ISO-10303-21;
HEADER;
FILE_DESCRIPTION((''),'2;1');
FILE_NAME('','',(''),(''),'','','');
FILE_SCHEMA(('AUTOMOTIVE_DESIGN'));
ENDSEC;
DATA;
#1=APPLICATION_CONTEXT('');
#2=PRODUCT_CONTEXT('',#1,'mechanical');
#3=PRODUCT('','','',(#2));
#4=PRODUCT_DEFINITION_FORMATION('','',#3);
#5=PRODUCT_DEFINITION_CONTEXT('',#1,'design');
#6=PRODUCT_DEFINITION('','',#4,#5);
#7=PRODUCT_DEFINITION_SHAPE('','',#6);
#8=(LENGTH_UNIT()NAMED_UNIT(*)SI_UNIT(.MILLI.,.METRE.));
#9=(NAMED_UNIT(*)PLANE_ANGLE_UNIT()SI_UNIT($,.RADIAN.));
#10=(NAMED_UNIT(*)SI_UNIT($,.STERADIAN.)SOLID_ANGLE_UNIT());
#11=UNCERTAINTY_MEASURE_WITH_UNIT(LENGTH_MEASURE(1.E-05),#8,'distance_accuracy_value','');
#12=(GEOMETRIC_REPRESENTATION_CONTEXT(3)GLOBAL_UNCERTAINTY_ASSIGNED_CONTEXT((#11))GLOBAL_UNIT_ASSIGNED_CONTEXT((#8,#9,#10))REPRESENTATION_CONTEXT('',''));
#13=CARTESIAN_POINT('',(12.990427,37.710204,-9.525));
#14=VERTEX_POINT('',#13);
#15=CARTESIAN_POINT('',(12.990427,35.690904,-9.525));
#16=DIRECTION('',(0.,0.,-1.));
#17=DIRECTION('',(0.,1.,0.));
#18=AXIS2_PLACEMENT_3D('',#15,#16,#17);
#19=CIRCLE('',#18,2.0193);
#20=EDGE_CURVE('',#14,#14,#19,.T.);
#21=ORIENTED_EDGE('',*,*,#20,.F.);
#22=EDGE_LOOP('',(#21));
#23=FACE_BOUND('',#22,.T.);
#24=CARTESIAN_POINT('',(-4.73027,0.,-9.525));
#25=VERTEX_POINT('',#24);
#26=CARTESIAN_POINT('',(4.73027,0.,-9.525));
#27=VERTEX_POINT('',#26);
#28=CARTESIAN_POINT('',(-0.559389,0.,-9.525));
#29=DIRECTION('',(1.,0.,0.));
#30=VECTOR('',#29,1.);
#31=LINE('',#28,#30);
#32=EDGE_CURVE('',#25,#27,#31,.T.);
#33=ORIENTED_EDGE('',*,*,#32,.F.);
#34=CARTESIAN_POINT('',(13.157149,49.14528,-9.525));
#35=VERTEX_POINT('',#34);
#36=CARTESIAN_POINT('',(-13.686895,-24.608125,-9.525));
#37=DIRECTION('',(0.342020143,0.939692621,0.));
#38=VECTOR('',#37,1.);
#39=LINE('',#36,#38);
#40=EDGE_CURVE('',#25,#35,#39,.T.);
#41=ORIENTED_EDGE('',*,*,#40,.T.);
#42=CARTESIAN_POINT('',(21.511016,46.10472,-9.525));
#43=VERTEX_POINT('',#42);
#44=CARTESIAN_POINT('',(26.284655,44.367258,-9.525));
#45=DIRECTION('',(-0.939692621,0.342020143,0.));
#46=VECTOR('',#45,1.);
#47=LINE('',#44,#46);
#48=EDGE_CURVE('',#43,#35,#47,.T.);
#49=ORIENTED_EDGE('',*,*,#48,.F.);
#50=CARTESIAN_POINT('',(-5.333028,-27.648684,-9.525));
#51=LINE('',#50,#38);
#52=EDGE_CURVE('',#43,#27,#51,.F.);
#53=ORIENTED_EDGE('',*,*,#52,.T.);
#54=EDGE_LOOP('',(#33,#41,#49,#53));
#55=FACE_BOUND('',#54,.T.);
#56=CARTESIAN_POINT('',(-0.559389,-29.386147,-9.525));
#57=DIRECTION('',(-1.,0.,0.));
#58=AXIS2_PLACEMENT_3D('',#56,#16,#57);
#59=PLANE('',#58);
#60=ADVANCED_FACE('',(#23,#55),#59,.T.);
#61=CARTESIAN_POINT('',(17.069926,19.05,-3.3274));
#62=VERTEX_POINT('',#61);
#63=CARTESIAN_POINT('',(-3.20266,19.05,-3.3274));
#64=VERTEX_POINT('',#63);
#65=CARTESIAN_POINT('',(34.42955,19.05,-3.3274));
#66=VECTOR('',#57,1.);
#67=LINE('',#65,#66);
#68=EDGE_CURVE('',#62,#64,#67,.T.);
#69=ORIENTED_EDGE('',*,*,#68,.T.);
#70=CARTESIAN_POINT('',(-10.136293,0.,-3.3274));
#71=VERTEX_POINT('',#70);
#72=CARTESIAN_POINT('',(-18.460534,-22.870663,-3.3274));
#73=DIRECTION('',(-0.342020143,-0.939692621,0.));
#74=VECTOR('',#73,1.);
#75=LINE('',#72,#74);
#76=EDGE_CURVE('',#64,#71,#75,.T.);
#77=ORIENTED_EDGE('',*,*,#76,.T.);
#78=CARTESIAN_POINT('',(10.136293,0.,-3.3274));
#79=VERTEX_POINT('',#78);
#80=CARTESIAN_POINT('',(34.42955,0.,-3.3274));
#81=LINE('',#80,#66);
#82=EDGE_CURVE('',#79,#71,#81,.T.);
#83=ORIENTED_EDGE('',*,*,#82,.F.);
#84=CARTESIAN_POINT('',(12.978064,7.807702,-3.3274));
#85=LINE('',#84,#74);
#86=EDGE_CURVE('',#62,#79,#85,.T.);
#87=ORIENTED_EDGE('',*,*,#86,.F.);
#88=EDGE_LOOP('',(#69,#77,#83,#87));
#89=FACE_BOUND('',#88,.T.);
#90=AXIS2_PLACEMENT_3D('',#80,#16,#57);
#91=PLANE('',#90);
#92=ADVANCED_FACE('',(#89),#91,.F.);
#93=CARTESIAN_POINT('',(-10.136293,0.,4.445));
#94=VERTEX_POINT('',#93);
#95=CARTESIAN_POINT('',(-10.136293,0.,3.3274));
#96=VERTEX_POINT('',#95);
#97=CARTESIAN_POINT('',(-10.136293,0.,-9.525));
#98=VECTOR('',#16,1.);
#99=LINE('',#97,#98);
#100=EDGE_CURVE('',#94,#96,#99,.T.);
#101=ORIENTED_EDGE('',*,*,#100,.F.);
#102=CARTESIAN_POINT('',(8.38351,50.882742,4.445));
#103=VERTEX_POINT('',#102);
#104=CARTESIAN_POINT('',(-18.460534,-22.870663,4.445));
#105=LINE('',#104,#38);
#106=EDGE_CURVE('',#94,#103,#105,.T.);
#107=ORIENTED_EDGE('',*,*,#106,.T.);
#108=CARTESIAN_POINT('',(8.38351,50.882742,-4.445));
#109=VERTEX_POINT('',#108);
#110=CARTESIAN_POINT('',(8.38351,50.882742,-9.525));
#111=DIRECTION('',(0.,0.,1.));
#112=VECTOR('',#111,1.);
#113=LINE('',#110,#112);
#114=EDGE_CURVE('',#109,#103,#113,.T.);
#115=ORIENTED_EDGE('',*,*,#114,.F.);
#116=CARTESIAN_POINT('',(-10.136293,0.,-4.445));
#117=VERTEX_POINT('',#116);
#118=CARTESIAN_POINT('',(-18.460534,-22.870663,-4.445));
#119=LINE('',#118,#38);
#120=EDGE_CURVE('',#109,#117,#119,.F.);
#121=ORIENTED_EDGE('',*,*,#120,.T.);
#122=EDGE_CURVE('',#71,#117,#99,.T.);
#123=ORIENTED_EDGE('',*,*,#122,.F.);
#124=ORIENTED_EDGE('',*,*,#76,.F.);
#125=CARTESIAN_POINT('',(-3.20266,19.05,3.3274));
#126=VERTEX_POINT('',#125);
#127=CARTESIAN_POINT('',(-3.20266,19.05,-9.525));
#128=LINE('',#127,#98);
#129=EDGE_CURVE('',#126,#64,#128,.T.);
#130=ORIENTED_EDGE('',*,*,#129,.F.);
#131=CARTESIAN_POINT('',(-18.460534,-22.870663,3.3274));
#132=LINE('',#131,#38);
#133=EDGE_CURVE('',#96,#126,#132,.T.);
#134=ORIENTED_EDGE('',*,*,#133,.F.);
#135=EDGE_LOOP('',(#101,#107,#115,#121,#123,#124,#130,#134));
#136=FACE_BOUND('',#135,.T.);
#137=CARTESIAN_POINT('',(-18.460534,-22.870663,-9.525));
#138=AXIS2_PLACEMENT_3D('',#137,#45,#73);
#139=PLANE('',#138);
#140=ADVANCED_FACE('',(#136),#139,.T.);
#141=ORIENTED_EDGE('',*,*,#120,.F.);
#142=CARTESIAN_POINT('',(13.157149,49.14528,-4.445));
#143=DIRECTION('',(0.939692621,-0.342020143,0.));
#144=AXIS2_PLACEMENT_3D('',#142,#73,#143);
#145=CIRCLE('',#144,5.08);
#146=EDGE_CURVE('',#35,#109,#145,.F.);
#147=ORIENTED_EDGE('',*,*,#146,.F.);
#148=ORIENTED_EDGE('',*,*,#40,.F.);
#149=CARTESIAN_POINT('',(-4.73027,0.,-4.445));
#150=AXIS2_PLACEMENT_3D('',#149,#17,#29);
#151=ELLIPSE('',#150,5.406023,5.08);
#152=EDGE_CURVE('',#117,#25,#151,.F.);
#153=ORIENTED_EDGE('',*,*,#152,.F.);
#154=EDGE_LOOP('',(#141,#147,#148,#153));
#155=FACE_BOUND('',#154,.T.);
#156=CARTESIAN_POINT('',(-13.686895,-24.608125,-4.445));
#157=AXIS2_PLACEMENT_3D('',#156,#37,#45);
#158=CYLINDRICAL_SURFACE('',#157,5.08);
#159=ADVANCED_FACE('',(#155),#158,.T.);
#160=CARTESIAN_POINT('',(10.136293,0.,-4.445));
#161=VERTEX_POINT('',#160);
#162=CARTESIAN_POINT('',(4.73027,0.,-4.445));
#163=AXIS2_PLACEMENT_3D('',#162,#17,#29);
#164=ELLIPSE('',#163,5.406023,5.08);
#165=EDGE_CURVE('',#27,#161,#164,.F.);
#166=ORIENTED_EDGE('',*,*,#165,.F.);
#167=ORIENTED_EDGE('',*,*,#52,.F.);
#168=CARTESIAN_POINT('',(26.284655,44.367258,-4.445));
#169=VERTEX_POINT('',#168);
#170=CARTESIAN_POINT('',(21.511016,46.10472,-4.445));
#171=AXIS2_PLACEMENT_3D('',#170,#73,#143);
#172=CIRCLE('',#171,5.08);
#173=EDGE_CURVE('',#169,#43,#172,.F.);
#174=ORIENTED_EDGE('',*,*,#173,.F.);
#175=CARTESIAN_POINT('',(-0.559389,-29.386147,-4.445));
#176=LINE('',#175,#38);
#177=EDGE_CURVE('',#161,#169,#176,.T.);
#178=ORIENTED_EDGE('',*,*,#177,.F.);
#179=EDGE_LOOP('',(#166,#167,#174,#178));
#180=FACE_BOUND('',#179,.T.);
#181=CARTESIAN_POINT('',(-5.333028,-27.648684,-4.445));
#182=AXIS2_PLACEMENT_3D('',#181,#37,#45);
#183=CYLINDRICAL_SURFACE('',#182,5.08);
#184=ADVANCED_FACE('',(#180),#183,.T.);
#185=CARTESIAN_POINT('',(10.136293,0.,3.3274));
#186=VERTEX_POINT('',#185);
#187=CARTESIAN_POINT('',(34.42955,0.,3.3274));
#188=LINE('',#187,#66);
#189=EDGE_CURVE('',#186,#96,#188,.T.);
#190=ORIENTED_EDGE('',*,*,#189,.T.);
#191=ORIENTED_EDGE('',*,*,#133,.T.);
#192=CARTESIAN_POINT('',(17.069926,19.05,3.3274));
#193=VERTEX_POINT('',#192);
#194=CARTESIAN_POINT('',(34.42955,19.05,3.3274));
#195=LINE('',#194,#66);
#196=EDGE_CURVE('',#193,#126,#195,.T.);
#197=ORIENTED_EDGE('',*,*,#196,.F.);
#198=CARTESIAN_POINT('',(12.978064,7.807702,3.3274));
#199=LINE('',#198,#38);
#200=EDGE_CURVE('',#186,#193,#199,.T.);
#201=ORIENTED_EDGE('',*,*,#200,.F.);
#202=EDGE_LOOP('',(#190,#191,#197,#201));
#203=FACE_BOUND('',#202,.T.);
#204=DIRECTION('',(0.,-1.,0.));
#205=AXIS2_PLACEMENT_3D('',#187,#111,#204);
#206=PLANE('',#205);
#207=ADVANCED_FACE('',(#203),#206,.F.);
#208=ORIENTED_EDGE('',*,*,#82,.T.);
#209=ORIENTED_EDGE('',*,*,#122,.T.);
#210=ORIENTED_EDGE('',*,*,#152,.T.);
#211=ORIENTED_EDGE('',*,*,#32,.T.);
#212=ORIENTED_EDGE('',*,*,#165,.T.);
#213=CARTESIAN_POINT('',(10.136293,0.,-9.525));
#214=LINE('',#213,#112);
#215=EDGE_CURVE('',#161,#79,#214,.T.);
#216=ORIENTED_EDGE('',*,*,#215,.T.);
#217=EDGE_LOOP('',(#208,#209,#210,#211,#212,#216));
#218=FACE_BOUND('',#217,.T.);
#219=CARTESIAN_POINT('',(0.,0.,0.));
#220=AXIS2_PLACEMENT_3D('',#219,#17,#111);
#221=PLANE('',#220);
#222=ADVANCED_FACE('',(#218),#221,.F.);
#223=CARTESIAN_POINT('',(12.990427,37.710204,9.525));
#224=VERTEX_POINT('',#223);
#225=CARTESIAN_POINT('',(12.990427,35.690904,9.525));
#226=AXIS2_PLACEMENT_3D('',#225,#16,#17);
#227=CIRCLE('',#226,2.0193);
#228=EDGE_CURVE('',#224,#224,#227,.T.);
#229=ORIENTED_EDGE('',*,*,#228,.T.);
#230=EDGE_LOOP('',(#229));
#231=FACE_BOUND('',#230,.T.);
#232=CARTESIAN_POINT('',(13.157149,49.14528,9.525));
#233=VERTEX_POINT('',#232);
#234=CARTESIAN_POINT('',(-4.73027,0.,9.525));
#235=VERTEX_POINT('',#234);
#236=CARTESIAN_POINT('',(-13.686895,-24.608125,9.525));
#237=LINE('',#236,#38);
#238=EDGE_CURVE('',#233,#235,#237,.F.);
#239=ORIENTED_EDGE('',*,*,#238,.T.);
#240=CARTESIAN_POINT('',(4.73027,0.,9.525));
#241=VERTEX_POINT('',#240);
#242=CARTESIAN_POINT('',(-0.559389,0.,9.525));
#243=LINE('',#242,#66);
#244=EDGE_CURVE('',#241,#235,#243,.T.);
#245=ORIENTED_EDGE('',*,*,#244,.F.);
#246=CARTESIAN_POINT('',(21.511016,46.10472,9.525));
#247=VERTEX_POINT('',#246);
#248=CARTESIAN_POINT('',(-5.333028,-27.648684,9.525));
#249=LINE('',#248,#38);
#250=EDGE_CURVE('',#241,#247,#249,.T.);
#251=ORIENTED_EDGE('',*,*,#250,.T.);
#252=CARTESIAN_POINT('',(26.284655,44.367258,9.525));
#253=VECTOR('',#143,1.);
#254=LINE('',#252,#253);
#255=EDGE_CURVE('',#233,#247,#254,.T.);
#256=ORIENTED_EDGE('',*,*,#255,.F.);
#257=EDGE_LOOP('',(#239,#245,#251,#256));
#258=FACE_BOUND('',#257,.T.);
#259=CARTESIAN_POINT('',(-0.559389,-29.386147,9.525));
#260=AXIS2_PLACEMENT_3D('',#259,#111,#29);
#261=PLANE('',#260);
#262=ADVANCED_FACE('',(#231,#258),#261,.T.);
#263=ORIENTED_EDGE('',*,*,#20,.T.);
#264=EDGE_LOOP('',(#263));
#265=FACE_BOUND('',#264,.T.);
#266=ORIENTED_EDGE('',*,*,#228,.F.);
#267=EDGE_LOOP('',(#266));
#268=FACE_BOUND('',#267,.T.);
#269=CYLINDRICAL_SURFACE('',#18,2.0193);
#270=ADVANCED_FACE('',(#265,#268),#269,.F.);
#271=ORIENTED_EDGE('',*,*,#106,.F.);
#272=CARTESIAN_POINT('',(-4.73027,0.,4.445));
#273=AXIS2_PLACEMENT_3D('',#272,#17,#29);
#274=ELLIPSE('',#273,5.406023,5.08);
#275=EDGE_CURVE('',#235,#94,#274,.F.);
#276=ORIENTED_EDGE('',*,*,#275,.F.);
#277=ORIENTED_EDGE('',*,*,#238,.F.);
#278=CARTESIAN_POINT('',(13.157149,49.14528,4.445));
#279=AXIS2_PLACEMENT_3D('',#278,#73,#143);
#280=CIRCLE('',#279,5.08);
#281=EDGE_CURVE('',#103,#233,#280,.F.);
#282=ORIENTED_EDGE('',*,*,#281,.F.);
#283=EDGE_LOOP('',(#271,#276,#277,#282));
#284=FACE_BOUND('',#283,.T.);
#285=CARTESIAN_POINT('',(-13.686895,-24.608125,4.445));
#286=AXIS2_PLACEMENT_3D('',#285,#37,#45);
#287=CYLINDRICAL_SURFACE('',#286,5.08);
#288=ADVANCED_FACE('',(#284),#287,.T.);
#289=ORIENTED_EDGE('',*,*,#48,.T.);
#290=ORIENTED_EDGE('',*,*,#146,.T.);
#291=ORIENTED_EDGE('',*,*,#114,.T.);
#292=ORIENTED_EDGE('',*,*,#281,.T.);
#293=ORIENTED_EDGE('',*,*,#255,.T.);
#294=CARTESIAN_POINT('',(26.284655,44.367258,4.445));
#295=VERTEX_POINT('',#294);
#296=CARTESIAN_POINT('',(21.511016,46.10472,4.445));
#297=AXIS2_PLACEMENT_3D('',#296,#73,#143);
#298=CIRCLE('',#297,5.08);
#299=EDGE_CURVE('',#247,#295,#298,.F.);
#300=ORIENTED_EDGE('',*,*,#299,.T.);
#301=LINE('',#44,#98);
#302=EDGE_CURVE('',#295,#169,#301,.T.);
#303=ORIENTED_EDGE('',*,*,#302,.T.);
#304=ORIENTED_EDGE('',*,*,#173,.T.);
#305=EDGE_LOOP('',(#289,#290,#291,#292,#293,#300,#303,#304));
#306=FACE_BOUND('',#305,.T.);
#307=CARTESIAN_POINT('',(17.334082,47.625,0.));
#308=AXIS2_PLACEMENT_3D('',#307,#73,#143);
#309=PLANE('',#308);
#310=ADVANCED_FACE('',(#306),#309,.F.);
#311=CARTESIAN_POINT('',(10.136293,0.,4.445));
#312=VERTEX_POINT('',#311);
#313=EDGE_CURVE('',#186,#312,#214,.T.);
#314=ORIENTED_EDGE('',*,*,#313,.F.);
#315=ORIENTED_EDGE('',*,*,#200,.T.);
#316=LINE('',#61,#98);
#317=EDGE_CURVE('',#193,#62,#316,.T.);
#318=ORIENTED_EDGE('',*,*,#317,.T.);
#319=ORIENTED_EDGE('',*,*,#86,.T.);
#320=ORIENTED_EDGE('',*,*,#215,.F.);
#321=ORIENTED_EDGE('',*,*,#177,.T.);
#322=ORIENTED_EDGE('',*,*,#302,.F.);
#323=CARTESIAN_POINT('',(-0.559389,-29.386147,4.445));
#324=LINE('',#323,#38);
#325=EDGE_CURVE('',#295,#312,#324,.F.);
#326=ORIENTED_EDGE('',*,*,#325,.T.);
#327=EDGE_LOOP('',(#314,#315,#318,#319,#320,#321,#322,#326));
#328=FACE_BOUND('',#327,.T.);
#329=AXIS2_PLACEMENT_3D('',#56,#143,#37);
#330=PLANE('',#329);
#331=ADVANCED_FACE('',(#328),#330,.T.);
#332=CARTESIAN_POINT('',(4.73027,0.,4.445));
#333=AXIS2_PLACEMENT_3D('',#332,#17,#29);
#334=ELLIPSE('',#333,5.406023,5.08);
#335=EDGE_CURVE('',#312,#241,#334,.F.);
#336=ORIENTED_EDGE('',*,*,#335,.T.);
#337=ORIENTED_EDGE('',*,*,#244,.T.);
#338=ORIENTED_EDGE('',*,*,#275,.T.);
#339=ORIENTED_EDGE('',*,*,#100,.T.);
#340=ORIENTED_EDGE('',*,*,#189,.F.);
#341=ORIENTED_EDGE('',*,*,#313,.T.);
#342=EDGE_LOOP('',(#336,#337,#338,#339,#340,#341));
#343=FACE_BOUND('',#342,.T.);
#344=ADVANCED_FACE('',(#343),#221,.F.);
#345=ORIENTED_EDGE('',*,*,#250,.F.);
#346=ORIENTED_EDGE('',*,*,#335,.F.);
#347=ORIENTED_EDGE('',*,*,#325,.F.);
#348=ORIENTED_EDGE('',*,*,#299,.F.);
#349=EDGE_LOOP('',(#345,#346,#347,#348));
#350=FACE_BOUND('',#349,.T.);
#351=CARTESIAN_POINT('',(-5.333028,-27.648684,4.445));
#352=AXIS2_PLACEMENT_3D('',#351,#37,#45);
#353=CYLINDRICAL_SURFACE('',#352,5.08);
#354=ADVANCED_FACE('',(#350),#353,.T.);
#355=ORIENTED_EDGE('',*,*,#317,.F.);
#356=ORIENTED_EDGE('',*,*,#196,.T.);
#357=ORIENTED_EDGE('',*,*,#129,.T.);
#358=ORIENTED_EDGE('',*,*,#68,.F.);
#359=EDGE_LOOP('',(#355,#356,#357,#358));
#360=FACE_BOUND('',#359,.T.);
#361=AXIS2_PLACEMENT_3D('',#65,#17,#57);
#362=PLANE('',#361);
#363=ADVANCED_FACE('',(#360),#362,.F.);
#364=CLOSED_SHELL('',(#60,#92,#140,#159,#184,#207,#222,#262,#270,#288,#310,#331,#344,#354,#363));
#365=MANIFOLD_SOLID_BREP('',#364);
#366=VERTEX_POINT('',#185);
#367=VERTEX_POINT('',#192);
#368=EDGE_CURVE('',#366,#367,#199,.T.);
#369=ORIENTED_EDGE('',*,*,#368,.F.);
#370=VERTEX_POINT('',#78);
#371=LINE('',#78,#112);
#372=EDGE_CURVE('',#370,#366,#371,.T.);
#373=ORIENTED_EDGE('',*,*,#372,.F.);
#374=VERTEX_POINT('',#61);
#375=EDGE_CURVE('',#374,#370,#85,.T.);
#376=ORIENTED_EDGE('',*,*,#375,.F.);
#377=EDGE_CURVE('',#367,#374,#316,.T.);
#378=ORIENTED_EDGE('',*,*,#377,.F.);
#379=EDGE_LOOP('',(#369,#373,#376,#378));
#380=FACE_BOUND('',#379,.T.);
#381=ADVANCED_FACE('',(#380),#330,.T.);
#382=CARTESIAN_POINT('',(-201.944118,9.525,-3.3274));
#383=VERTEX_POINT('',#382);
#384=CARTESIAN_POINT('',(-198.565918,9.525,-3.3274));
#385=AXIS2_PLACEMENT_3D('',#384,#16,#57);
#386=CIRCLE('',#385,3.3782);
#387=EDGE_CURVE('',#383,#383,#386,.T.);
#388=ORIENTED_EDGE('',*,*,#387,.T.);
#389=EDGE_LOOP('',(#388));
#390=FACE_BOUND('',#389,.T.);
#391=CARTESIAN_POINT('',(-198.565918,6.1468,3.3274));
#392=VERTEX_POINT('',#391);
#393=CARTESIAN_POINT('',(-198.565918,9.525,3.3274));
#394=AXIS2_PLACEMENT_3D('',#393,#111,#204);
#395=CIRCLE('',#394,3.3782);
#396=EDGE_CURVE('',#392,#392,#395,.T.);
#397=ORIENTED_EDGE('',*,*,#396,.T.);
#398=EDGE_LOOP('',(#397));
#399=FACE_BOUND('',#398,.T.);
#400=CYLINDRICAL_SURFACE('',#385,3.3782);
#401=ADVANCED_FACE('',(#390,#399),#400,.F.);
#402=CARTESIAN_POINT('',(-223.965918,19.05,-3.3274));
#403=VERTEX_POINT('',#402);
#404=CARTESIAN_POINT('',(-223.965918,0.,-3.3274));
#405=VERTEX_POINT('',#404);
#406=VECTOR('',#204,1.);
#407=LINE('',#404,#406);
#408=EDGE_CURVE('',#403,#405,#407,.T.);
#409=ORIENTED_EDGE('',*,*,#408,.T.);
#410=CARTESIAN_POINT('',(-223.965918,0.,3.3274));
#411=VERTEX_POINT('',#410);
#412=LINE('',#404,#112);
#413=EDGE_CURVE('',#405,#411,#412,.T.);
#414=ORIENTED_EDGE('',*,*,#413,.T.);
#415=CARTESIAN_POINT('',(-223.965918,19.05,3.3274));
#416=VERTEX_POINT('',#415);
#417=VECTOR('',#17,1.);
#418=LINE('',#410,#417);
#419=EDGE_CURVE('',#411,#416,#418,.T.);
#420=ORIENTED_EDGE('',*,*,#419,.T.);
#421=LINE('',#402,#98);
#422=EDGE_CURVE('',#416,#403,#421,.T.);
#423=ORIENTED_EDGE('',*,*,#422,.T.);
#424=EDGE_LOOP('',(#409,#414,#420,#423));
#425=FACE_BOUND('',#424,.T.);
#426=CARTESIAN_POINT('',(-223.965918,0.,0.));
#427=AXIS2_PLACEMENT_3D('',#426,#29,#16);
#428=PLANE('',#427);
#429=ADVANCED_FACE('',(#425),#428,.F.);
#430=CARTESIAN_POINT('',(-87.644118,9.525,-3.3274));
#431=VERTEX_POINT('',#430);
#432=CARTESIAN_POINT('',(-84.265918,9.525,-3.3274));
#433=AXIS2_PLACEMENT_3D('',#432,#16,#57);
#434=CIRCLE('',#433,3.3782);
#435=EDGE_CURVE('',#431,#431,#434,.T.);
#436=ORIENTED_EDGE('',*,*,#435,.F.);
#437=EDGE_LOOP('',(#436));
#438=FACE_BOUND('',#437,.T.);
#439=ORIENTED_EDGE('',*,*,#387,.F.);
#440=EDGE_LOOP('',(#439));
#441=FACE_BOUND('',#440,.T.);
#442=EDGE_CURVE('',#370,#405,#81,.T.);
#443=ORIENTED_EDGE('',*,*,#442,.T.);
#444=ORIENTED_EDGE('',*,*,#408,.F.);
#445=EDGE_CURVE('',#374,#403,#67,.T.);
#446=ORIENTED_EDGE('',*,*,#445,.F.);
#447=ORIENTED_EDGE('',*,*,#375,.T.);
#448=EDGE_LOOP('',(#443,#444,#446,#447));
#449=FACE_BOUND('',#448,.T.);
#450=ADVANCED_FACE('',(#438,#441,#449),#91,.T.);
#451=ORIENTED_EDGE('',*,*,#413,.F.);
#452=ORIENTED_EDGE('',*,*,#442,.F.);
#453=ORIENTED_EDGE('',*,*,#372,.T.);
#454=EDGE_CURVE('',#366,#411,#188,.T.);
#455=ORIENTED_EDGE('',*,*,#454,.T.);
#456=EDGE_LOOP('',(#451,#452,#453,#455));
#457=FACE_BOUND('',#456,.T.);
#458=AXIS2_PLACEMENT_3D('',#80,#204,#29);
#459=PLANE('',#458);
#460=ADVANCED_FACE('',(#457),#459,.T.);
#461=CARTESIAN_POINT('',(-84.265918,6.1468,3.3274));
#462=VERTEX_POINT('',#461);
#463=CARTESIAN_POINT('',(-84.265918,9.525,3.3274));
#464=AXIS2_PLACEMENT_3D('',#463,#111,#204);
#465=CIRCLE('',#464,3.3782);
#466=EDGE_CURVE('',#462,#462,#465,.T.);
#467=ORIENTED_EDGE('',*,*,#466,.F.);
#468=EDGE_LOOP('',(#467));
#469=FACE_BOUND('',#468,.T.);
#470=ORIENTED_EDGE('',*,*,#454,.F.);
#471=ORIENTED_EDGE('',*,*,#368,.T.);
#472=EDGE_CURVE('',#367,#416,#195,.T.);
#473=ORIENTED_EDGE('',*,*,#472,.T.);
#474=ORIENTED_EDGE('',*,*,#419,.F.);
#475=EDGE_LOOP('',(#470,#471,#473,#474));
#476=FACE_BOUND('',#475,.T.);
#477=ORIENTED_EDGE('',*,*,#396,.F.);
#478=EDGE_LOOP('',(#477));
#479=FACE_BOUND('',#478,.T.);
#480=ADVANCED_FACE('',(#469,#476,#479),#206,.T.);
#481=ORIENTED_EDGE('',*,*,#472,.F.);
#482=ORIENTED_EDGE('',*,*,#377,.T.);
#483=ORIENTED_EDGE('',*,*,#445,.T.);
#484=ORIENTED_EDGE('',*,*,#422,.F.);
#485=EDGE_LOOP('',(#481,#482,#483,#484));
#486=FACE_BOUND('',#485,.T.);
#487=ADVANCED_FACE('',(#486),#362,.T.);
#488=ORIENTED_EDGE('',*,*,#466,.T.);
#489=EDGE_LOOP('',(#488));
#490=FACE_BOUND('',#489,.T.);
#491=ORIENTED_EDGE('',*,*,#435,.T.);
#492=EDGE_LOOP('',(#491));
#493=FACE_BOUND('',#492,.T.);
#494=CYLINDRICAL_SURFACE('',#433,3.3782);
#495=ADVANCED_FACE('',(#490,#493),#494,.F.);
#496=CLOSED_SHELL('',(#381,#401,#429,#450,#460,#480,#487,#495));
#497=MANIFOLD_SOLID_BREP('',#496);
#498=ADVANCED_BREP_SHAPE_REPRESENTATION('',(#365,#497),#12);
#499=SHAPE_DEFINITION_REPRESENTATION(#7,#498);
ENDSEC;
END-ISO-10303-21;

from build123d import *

# Parameters (mm, degrees)
BOSS_EXTRUDE2_REACH              = 80.351
SKETCH9_W                        = 19.05
SKETCH9_H                        = 19.05
F_10_32_TAPPED_HOLE1_D           = 4.0386
CUT_EXTRUDE2_REACH               = 260.043
SKETCH11_W                       = 6.6548
SKETCH11_H                       = 19.05
FILLET1_R                        = 5.08
BOSS_EXTRUDE3_REACH              = 260.043
SKETCH11_2_W                     = 6.6548
SKETCH11_2_H                     = 19.05
SKETCH17_W                       = 3.3782
SKETCH17_H                       = 12.8524
F_1_4_CLEARANCE_HOLE1_AT_2_COUNT = 2
F_1_4_CLEARANCE_HOLE1_AT_2_PITCH = 114.3


with BuildPart() as part:
    # Boss-Extrude2: up to this plane
    boss_extrude2_end = Plane(origin=(0, 0, 0), z_dir=(0, 1, 0))
    # Sketch9 → Boss-Extrude2 (new, up to the surface)
    with BuildSketch(Plane(origin=(17.334082407, 47.625, 0), x_dir=(0.939692620785907, -0.34202014332567254, 0), z_dir=(0.34202014332567254, 0.939692620785907, 0)), mode=Mode.PRIVATE) as boss_extrude2_sk1:
        Rectangle(SKETCH9_W, SKETCH9_H)
    boss_extrude2_tool1 = split(extrude(boss_extrude2_sk1.sketch, amount=-BOSS_EXTRUDE2_REACH, mode=Mode.PRIVATE), bisect_by=boss_extrude2_end, keep=Keep.BOTH, mode=Mode.PRIVATE)
    add(boss_extrude2_tool1.solids().sort_by_distance((17.334082, 47.625, 0))[0])

    # #10-32 Tapped Hole1 (through all)
    with Locations(Plane(origin=(0, 0, -9.525), x_dir=(-1, 0, 0), z_dir=(0, 0, -1))):
        with Locations((-12.990426587, 35.690903716)):
            Hole(F_10_32_TAPPED_HOLE1_D / 2)

    # Cut-Extrude2: up to this plane
    cut_extrude2_end = Plane(origin=(-0.559389402, -29.386146661, -9.525), z_dir=(0.939692620785907, -0.3420201433256725, 0))
    # Sketch11 → Cut-Extrude2 (cut, up to the surface)
    with BuildSketch(Plane.ZY.offset(223.965917593), mode=Mode.PRIVATE) as cut_extrude2_sk1:
        with Locations((0, 9.525)):
            Rectangle(SKETCH11_W, SKETCH11_H)
    cut_extrude2_tool1 = split(extrude(cut_extrude2_sk1.sketch, amount=-CUT_EXTRUDE2_REACH, mode=Mode.PRIVATE), bisect_by=cut_extrude2_end, keep=Keep.BOTH, mode=Mode.PRIVATE)
    add(cut_extrude2_tool1.solids().sort_by_distance((-223.965918, 9.525, 0))[0], mode=Mode.SUBTRACT)

    # Fillet1
    fillet1_edges = [part.edges().sort_by_distance(p)[0] for p in [
        (18.210473951, 22.183629067, 9.525),
        (-0.876391544, 25.441370933, 9.525),
        (-0.876391544, 25.441370933, -9.525),
        (18.210473951, 22.183629067, -9.525),
    ]]
    fillet(fillet1_edges, radius=FILLET1_R)


with BuildPart() as body_2:
    # Boss-Extrude3: up to this plane
    boss_extrude3_end = Plane(origin=(-0.559389402, -29.386146661, -9.525), z_dir=(0.939692620785907, -0.3420201433256725, 0))
    # Sketch11<2> → Boss-Extrude3 (new, up to the surface)
    with BuildSketch(Plane.ZY.offset(223.965917593), mode=Mode.PRIVATE) as boss_extrude3_sk1:
        with Locations((0, 9.525)):
            Rectangle(SKETCH11_2_W, SKETCH11_2_H)
    boss_extrude3_tool1 = split(extrude(boss_extrude3_sk1.sketch, amount=-BOSS_EXTRUDE3_REACH, mode=Mode.PRIVATE), bisect_by=boss_extrude3_end, keep=Keep.BOTH, mode=Mode.PRIVATE)
    add(boss_extrude3_tool1.solids().sort_by_distance((-223.965918, 9.525, 0))[0])

    # Sketch17 → 1/4 Clearance Hole1 (revolve, cut)
    with BuildSketch(Plane(origin=(-84.265917593, 9.525, -3.3274), x_dir=(0, 1, 0), z_dir=(1, 0, 0))):
        with Locations((1.6891, 6.4262)):
            Rectangle(SKETCH17_W, SKETCH17_H)
    f_1_4_clearance_hole1 = revolve(axis=Axis((-84.265917593, 9.525, -9.6774), (0, 0, 1)), mode=Mode.SUBTRACT)

    # 1/4 Clearance Hole1 at 2: 1/4 Clearance Hole1 ×2
    with Locations(*[(-i * F_1_4_CLEARANCE_HOLE1_AT_2_PITCH, 0, 0) for i in range(1, F_1_4_CLEARANCE_HOLE1_AT_2_COUNT)]):
        add(f_1_4_clearance_hole1, mode=Mode.SUBTRACT)


solid = Compound([part.part, body_2.part])
